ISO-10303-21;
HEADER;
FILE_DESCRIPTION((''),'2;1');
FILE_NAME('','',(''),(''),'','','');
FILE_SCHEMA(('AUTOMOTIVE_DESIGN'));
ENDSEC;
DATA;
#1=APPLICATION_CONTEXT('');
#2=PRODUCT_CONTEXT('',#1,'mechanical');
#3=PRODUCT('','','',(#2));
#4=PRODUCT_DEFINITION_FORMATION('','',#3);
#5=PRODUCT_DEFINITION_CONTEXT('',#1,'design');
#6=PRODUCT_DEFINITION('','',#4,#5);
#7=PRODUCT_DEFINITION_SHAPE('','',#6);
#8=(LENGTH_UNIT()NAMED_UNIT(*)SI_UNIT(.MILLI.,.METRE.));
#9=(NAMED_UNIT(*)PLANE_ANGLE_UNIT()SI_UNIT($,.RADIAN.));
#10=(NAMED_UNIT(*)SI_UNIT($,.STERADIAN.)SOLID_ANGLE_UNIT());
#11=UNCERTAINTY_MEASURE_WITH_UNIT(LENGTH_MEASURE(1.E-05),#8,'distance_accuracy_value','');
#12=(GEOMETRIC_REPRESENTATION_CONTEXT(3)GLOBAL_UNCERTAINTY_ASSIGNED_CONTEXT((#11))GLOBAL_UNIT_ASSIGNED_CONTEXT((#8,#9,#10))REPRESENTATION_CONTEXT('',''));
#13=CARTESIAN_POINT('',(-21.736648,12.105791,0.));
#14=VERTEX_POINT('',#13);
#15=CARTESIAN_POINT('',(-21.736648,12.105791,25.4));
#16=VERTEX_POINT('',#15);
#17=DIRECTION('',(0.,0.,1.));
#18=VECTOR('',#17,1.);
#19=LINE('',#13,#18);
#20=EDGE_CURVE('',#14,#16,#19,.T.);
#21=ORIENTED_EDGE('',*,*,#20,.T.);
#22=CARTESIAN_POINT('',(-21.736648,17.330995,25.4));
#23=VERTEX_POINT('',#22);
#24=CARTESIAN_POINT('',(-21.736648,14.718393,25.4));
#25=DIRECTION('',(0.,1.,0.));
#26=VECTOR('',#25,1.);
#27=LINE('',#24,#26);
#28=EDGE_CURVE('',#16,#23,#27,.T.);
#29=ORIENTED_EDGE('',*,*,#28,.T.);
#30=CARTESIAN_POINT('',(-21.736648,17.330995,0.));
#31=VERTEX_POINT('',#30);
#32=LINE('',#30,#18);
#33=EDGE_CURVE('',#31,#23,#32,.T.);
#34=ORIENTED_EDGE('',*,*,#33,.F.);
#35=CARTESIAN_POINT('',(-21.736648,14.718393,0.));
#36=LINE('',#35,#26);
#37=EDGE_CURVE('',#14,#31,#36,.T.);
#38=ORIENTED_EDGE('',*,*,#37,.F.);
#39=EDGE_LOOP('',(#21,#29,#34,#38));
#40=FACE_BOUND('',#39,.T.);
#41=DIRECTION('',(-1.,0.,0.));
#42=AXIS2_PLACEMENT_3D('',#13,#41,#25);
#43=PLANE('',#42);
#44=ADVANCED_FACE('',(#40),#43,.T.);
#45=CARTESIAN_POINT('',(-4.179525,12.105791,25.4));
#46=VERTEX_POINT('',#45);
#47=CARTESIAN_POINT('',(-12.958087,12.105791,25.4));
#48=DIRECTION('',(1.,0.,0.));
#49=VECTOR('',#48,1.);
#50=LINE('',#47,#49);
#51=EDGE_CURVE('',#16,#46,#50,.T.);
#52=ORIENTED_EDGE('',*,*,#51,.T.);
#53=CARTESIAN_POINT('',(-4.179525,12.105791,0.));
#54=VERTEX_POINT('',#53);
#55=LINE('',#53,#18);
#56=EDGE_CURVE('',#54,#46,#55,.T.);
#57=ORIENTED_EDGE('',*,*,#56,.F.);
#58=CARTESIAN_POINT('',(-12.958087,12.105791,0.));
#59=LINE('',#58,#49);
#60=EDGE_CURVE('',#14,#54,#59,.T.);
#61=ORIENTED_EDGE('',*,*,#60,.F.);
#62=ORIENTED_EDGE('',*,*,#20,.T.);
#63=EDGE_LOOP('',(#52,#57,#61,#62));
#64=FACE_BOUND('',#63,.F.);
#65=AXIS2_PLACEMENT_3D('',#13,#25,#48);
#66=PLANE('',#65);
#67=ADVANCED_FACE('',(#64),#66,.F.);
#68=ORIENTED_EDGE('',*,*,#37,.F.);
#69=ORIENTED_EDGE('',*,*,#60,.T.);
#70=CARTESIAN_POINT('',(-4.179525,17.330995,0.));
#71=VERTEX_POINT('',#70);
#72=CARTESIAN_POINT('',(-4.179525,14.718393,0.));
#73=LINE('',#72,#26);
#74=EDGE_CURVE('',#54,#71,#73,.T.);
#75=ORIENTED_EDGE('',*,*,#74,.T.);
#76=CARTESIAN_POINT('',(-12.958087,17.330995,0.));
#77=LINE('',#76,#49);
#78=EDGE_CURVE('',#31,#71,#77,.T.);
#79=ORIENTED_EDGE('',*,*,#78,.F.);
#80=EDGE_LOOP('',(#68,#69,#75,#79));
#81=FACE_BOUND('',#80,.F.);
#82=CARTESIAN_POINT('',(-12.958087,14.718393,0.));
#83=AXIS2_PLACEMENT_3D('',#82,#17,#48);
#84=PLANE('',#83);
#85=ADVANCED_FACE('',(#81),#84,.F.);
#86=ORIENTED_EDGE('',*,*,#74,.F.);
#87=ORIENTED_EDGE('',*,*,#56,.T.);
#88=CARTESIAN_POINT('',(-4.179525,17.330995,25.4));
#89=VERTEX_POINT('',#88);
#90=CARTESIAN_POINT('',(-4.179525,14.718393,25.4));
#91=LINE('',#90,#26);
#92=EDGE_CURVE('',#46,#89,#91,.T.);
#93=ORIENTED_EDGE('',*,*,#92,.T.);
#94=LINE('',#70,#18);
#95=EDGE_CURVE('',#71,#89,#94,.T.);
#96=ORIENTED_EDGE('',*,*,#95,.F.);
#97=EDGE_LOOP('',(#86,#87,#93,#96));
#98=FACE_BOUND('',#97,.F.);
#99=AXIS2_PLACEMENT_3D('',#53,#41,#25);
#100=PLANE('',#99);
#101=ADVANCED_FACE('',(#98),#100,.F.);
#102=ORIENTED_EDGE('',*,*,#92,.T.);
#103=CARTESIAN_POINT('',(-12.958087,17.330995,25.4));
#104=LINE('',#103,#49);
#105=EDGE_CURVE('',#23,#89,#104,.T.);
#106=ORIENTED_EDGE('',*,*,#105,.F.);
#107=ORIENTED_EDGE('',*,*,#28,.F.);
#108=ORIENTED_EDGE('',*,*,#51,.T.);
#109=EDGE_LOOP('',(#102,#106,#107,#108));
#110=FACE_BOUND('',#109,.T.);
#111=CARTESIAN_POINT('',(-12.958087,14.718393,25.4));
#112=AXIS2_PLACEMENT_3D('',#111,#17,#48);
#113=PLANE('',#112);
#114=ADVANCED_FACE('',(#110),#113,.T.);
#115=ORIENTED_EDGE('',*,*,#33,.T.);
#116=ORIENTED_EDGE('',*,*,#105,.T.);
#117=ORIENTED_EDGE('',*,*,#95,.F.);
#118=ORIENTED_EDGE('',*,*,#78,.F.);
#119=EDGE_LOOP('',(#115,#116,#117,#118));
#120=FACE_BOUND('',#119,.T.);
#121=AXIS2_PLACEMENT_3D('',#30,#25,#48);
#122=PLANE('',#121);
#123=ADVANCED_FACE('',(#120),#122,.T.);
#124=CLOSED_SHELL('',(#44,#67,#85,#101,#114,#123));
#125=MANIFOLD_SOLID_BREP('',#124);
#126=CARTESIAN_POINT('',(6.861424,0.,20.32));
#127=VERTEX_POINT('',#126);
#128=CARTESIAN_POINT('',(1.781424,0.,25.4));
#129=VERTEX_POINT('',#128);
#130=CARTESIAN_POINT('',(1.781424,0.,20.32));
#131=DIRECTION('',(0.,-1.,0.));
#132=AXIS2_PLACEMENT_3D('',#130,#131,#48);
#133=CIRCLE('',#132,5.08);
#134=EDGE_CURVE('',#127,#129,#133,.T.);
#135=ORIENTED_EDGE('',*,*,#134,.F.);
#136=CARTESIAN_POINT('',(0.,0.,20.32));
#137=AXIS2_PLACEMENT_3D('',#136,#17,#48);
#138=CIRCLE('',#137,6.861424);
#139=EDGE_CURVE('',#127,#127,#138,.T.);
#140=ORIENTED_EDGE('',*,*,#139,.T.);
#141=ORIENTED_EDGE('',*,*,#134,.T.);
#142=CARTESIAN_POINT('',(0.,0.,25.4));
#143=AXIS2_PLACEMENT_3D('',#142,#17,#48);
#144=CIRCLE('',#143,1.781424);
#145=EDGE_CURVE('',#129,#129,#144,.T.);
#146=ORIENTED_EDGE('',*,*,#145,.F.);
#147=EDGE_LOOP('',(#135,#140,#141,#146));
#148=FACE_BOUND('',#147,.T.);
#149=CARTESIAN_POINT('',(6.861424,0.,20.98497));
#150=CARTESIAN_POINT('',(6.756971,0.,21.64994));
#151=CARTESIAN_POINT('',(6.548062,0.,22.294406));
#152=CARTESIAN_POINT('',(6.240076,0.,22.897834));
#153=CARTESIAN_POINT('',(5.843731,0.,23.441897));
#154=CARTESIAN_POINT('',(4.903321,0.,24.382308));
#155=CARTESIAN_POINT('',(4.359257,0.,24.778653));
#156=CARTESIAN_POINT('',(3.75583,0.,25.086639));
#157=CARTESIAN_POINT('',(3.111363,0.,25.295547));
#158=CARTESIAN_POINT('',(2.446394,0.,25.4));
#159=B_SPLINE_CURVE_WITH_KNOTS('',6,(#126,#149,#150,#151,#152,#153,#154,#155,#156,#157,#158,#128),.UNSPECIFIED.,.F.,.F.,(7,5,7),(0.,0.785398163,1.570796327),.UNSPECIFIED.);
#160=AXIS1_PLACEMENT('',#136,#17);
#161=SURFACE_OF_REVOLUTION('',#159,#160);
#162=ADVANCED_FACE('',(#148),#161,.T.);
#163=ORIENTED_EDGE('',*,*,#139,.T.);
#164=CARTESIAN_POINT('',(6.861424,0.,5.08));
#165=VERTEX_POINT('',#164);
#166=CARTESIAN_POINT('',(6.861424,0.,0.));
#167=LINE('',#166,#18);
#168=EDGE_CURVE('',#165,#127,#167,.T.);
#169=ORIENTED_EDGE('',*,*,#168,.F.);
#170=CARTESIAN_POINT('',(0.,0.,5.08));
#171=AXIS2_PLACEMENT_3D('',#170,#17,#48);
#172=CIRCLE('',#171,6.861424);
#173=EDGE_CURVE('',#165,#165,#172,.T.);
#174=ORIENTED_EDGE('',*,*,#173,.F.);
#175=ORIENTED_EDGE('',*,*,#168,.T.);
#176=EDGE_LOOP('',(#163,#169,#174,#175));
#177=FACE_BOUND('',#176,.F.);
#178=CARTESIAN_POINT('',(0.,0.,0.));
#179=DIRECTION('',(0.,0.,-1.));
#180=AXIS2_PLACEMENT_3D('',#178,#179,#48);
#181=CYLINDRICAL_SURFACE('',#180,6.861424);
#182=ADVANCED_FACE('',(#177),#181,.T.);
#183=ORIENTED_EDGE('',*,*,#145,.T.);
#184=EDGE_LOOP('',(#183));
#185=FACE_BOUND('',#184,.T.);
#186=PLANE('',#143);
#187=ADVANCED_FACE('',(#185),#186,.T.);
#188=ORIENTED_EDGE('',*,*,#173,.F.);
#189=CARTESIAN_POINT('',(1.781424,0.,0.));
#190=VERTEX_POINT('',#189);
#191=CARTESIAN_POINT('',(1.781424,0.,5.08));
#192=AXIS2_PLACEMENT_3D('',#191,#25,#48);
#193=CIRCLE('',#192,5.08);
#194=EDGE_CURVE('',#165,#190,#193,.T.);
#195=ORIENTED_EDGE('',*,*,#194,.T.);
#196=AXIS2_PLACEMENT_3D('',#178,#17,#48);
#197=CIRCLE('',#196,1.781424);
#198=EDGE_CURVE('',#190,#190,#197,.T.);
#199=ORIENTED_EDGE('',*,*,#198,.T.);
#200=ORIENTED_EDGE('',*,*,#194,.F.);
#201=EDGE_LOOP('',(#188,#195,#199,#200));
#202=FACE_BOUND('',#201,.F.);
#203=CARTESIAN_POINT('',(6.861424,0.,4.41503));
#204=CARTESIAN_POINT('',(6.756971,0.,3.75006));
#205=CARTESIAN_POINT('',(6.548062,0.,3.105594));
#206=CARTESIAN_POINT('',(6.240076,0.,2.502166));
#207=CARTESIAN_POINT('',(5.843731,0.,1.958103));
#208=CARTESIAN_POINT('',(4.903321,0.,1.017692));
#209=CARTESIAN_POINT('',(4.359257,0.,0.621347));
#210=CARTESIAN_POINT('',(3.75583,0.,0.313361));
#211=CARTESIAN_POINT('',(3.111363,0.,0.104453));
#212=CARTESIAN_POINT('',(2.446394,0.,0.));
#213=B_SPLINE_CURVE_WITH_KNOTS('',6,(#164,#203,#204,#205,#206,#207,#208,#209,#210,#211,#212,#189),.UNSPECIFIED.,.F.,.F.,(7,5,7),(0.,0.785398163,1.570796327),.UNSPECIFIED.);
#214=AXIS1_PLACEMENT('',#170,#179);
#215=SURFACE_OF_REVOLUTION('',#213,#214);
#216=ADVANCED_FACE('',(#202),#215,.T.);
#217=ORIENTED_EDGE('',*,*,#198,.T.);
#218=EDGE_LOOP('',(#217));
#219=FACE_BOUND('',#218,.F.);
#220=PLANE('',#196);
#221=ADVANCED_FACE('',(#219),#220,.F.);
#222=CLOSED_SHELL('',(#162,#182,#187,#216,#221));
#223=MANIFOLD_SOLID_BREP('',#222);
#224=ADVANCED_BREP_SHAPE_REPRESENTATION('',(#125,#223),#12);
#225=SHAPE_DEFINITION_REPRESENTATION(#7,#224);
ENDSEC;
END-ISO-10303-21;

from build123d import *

# Parameters (mm, degrees)
F1_W     = 17.5571227446
F1_H     = 5.2252039313
F2_DEPTH = 25.4
F0_R     = 6.8614235902
F3_DEPTH = 25.4
F6_R     = 5.08


# Not quite as in the source:
# - the program builds the solid bodies; features that only make, move or delete a surface that nothing else refers to are left out


with BuildPart() as f2:
    # F1 (on Top) → F2 (new body)
    with BuildSketch(Plane.XY):
        with Locations((-12.9580865614, 14.7183928639)):
            Rectangle(F1_W, F1_H)
    extrude(amount=F2_DEPTH)


with BuildPart() as f3:
    # F0 (on Top) → F3 (new body)
    with BuildSketch(Plane.XY):
        Circle(F0_R)
    extrude(amount=F3_DEPTH)

    # F6
    f6_edges = [f3.edges().sort_by_distance(p)[0] for p in [
        (6.861424, 0, 12.7),
        (-6.861424, 0, 0),
        (-6.861424, 0, 25.4),
    ]]
    fillet(f6_edges, radius=F6_R)


solid = Compound([f2.part, f3.part])
